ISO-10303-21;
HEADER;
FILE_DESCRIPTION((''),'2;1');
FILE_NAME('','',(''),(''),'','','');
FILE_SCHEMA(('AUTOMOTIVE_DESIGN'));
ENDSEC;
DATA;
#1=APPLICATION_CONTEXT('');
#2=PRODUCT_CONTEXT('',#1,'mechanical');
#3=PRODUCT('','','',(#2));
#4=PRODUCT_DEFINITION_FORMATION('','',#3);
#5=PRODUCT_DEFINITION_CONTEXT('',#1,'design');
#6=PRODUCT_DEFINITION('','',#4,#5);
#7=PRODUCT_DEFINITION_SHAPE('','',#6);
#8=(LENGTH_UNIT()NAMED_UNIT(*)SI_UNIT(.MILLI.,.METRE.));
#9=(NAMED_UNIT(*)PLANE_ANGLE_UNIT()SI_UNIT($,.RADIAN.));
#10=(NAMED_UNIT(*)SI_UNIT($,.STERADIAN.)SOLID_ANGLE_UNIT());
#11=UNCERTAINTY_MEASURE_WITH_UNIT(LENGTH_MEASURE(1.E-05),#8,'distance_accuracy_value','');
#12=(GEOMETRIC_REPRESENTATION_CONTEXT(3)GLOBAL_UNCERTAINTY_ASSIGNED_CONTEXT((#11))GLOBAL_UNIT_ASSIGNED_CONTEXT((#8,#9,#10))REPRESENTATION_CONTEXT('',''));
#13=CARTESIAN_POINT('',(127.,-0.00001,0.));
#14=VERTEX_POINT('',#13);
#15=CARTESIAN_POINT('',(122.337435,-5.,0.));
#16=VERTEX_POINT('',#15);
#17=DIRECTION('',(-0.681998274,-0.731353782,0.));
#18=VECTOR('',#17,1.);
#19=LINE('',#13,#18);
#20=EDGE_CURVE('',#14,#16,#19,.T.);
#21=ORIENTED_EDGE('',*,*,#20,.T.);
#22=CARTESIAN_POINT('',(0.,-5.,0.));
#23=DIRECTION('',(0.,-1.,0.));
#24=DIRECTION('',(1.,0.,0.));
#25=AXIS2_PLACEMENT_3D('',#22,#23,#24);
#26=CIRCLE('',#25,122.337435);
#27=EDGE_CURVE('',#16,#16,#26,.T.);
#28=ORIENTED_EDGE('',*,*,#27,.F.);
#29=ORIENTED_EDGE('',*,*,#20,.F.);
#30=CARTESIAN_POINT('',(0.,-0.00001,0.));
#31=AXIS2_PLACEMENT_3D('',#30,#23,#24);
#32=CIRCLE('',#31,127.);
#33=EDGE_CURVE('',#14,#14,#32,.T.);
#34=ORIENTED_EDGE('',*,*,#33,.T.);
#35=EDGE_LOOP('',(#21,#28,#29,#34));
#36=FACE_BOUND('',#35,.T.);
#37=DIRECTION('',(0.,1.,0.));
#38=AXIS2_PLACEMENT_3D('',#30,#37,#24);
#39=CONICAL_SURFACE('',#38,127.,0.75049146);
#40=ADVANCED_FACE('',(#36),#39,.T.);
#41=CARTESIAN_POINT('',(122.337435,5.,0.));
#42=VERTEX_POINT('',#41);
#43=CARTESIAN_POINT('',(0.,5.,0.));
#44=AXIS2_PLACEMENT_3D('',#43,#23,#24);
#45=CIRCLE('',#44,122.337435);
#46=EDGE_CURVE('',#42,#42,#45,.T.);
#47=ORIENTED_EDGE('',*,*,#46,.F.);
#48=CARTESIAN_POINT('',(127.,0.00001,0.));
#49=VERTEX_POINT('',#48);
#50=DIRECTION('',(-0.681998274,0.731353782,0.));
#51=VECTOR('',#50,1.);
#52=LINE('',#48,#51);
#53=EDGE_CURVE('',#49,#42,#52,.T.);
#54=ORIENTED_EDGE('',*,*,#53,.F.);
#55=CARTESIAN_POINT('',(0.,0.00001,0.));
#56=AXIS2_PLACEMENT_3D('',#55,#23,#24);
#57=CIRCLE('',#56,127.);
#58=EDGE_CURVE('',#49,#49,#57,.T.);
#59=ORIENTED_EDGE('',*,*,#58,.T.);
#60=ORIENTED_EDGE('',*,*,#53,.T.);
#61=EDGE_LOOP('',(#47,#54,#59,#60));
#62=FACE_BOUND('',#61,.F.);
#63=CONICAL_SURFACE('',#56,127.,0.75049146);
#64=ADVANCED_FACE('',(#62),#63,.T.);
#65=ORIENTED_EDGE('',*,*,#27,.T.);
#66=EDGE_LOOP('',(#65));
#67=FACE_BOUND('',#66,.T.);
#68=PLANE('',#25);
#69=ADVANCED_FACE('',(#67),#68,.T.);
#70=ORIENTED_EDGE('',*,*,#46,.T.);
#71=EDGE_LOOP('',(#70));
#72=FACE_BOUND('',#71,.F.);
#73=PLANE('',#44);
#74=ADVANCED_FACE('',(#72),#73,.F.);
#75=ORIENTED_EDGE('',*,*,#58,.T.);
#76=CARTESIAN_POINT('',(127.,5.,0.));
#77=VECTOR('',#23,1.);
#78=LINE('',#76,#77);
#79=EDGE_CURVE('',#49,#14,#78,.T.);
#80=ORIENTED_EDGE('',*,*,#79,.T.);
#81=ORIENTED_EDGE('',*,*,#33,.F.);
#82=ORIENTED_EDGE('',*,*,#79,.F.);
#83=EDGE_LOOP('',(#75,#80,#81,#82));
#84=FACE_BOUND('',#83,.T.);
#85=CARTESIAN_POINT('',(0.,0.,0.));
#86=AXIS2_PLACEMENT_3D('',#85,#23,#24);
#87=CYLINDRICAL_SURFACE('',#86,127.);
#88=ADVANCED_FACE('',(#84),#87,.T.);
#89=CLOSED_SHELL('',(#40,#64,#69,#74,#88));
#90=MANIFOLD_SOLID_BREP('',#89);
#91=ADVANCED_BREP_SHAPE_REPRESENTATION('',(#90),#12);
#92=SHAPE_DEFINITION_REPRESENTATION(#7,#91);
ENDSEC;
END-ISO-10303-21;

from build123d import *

# Parameters (mm, degrees)
F0_R     = 127
F0_R_2   = 5
F1_DEPTH = 5
F2_DEPTH = 5
F3_SIZE2 = 4.662565
F3_SIZE  = 4.99999


# Not quite as in the source:
# - a fillet or chamfer is up to 0.001 mm smaller than in the source, because OpenCascade refuses the exact size


with BuildPart() as f1:
    # F0 (on Front) → F1 (new body, symmetric)
    with BuildSketch(Plane.XZ):
        Circle(F0_R)
        Circle(F0_R_2, mode=Mode.SUBTRACT)
    extrude(amount=F1_DEPTH, both=True)

    # F0 (on Front) → F2 (join, symmetric)
    with BuildSketch(Plane.XZ):
        Circle(F0_R_2)
    extrude(amount=F2_DEPTH, both=True)

    # F3 (size 5 and 4.6625754307 in the source; OpenCascade refuses exactly that, so slightly less here)
    f3_edges = [f1.edges().sort_by_distance(p)[0] for p in [
        (-127, 5, 0),
        (-127, -5, 0),
    ]]
    f3_side = f1.faces().sort_by_distance((-127, 0, 0))[0]
    chamfer(f3_edges, length=F3_SIZE, length2=F3_SIZE2, reference=f3_side)


solid = f1.part
